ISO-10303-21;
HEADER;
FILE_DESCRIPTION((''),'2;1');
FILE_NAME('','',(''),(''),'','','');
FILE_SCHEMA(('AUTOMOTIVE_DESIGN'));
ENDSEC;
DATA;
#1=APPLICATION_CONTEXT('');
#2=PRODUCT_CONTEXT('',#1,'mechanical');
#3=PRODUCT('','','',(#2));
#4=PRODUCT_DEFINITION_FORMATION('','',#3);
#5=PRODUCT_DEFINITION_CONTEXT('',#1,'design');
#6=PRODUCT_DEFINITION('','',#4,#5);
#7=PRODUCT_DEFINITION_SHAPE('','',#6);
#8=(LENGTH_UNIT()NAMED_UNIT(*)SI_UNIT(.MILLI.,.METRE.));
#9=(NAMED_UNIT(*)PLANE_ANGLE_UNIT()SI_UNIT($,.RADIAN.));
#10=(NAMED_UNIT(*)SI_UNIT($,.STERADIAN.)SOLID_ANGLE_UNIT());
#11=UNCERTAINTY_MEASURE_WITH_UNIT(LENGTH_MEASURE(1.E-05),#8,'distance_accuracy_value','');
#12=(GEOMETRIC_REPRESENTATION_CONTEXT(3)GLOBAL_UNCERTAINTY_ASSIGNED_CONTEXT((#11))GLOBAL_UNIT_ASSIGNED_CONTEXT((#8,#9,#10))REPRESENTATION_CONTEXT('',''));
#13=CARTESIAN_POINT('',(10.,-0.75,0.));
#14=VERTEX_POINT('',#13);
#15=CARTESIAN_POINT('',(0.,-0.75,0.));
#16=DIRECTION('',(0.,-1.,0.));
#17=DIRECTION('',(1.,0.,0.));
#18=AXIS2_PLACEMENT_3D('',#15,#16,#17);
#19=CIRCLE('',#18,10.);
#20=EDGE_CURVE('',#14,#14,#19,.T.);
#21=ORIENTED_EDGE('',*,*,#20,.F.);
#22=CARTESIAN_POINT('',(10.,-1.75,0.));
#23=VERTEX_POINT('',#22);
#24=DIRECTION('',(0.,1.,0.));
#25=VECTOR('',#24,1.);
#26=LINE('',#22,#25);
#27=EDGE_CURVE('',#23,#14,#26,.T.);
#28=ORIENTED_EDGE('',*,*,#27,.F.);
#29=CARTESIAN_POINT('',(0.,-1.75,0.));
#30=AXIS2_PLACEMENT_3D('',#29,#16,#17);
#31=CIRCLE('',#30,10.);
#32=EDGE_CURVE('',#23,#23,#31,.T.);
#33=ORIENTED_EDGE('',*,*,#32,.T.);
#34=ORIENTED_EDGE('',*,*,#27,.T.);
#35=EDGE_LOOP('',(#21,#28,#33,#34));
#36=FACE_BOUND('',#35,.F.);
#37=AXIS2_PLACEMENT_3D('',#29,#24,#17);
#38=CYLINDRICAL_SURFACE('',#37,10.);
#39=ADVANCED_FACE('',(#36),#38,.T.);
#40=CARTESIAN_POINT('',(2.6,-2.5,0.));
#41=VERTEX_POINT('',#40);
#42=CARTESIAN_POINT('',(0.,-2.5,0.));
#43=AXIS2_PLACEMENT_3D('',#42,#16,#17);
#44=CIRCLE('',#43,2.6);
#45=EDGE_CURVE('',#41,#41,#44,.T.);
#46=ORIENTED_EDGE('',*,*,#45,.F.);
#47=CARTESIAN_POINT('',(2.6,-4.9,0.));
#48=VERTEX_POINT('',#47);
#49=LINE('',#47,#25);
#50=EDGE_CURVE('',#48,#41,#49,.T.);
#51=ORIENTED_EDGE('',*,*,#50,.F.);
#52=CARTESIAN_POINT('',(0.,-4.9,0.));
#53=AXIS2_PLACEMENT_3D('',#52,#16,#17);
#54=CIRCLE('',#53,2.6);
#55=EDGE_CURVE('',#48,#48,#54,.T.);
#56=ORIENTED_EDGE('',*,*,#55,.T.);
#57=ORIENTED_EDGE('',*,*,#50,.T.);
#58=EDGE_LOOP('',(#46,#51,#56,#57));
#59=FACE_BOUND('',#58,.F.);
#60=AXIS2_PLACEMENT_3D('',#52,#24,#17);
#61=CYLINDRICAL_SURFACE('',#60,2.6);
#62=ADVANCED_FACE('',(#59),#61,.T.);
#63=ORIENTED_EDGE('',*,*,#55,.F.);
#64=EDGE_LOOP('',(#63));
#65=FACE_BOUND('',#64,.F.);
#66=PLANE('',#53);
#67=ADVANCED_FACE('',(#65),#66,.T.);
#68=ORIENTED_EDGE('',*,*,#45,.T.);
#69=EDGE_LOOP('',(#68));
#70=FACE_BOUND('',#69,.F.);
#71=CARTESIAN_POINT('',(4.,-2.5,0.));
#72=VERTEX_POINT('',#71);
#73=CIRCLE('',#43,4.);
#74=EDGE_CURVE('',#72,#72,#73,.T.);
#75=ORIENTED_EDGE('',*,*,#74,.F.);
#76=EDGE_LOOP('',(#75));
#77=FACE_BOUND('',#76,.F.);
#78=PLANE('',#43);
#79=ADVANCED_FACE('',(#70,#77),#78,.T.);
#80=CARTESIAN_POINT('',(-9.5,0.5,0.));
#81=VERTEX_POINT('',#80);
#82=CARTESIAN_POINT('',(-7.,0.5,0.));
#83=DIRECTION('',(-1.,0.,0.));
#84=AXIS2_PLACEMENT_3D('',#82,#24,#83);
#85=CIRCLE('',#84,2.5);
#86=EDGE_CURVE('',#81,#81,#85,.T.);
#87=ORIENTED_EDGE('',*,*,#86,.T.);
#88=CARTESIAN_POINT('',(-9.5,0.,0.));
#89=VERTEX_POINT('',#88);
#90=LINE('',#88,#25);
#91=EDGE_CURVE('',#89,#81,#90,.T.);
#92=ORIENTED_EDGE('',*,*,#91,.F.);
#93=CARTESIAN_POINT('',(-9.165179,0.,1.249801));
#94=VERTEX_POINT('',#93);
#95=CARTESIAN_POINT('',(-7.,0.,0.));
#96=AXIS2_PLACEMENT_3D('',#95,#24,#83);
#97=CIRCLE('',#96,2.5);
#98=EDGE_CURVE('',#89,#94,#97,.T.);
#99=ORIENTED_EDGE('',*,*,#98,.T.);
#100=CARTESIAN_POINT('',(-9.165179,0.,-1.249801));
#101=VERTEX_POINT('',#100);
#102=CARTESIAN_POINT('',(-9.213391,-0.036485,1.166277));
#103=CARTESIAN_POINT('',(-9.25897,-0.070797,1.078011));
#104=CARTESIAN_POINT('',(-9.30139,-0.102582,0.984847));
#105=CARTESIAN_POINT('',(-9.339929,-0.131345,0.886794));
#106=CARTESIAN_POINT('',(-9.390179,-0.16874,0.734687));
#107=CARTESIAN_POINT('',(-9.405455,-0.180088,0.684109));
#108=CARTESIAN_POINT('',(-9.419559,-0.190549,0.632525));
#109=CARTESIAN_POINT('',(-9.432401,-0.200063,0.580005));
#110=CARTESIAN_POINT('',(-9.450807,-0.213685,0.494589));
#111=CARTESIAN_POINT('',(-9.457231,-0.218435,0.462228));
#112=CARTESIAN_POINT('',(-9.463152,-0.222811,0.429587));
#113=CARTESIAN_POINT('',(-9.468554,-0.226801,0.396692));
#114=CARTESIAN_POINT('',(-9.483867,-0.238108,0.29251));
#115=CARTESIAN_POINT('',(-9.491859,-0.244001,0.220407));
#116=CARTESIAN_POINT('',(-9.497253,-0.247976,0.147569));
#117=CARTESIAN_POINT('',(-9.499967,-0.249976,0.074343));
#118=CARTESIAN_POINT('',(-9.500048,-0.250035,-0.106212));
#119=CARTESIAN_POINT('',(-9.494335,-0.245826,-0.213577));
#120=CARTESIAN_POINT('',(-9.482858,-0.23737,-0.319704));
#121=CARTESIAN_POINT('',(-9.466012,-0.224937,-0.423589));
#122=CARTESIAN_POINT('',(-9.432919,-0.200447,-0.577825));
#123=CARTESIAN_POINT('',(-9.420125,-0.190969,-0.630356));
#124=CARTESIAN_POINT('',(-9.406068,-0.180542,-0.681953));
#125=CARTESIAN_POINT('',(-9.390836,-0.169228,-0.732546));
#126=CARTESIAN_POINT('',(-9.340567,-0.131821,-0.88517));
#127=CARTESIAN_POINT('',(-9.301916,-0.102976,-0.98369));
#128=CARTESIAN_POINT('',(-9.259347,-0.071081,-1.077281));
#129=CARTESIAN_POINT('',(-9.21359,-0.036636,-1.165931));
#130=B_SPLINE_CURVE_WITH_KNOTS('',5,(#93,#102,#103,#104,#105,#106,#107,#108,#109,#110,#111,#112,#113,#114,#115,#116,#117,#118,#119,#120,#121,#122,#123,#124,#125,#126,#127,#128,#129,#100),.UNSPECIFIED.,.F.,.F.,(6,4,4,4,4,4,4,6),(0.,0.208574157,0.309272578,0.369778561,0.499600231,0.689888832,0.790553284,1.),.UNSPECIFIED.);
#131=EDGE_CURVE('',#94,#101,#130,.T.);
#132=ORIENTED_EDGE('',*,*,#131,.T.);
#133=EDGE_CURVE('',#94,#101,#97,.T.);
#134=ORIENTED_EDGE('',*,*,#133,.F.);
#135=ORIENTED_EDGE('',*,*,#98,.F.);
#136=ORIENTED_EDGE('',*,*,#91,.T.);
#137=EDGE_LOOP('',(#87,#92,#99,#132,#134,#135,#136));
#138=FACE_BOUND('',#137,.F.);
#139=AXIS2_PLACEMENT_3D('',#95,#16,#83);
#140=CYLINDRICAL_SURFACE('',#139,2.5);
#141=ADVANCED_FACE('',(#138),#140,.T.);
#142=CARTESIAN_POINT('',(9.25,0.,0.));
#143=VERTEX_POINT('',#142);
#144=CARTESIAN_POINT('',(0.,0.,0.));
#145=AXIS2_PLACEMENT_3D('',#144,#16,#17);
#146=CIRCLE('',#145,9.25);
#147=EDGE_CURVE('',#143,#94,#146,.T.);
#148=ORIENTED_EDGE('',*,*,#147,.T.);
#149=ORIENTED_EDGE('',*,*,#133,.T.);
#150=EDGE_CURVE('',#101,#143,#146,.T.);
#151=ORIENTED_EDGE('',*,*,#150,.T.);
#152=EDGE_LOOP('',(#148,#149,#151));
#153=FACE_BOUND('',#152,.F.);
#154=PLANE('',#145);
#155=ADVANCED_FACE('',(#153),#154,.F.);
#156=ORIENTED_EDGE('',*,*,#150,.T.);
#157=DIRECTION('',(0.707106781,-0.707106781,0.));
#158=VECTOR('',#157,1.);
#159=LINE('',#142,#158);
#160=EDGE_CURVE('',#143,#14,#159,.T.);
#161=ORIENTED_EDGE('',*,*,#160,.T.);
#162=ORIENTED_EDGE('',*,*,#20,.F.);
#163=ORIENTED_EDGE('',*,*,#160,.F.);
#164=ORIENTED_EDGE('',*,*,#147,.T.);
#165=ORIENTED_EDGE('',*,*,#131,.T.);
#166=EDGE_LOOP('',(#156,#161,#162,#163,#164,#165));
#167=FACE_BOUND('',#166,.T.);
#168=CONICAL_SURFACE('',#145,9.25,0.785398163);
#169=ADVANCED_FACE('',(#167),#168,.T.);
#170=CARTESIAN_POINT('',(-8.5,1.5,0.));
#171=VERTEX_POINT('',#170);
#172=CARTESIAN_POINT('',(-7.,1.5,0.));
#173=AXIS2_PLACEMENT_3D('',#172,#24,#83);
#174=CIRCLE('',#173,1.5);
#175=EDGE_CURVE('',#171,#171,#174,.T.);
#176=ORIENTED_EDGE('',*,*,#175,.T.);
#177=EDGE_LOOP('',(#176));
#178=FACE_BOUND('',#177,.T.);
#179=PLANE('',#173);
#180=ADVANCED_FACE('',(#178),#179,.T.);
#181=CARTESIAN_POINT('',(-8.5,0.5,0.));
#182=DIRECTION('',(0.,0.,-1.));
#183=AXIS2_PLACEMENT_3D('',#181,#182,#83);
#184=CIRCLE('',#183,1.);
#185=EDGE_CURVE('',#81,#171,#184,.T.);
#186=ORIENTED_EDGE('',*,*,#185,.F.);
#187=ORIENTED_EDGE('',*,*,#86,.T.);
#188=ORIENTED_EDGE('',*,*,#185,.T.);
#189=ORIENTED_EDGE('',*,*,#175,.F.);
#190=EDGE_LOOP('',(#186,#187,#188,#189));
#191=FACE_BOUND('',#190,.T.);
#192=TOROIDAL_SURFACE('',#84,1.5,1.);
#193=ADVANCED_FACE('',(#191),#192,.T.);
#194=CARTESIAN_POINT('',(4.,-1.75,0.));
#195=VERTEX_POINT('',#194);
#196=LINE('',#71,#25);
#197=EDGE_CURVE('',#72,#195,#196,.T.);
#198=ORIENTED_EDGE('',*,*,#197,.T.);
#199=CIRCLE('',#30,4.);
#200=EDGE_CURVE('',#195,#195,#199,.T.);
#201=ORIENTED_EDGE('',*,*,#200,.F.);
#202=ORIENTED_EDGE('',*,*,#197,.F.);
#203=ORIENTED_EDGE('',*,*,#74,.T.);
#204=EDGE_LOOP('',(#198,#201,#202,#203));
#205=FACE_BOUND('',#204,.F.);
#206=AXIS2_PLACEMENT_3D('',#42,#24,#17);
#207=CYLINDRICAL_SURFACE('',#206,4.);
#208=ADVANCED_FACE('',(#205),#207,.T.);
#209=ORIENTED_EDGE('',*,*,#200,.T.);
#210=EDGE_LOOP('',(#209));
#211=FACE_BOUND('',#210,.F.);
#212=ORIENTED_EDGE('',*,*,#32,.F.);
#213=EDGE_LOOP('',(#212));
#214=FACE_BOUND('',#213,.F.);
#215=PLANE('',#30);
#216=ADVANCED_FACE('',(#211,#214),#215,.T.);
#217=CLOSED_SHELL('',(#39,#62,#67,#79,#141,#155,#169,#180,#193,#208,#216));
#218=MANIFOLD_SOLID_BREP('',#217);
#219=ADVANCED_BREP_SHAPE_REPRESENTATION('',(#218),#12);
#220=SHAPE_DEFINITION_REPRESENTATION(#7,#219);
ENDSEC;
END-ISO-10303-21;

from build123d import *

# Parameters (mm, degrees)
F2_R        = 2.5
F3_DEPTH    = 1.5
F4_R        = 1
F5_S5_R     = 2.5
F5_T6_DEPTH = 16


# Not quite as in the source:
# - a fillet or chamfer that OpenCascade refuses, or shapes differently, is made with other operations: its cross-section is extruded or revolved along the edge and cut away or added


with BuildPart() as f1:
    # F0 (on Top) → F1 (revolve)
    with BuildSketch(Plane.XY):
        Polygon((0, 0), (0, -4.9), (2.6, -4.9), (2.6, -2.8), (2.6, -2.5), (4, -2.5), (4, -1.75), (10, -1.75), (10, 0), align=None)
    revolve(axis=Axis((0, -2.45, 0), (0, -1, 0)))

    # F2 (on face) → F3 (join)
    with BuildSketch(Plane(origin=(0, 0, 0), x_dir=(-1, 0, 0), z_dir=(0, 1, 0))):
        with Locations((7, 0)):
            Circle(F2_R)
    extrude(amount=F3_DEPTH)

    # F4
    f4_edges = [f1.edges().sort_by_distance(p)[0] for p in [
        (-4.5, 1.5, 0),
    ]]
    fillet(f4_edges, radius=F4_R)

    # F5: chamfer of 0.75 on 1 edges, made by hand


with BuildPart() as f5_tool2:
    # F5_s3 → F5_t4 (revolve)
    with BuildSketch(Plane.XY):
        Polygon((9.25, 0), (10, -0.75), (10, 0), align=None)
    revolve(axis=Axis((0, 0, 0), (0, -1, 0)))

    # F5_s5 → F5_t6 (cut, symmetric)
    with BuildSketch(Plane.XZ.offset(0.4)):
        with Locations((-7, 0)):
            Circle(F5_S5_R)
    extrude(amount=F5_T6_DEPTH, both=True, mode=Mode.SUBTRACT)


with BuildPart() as f1_1:
    add(f1.part)

    # F5_t1: cut F5_tool2
    add(f5_tool2.part, mode=Mode.SUBTRACT)


solid = f1_1.part
